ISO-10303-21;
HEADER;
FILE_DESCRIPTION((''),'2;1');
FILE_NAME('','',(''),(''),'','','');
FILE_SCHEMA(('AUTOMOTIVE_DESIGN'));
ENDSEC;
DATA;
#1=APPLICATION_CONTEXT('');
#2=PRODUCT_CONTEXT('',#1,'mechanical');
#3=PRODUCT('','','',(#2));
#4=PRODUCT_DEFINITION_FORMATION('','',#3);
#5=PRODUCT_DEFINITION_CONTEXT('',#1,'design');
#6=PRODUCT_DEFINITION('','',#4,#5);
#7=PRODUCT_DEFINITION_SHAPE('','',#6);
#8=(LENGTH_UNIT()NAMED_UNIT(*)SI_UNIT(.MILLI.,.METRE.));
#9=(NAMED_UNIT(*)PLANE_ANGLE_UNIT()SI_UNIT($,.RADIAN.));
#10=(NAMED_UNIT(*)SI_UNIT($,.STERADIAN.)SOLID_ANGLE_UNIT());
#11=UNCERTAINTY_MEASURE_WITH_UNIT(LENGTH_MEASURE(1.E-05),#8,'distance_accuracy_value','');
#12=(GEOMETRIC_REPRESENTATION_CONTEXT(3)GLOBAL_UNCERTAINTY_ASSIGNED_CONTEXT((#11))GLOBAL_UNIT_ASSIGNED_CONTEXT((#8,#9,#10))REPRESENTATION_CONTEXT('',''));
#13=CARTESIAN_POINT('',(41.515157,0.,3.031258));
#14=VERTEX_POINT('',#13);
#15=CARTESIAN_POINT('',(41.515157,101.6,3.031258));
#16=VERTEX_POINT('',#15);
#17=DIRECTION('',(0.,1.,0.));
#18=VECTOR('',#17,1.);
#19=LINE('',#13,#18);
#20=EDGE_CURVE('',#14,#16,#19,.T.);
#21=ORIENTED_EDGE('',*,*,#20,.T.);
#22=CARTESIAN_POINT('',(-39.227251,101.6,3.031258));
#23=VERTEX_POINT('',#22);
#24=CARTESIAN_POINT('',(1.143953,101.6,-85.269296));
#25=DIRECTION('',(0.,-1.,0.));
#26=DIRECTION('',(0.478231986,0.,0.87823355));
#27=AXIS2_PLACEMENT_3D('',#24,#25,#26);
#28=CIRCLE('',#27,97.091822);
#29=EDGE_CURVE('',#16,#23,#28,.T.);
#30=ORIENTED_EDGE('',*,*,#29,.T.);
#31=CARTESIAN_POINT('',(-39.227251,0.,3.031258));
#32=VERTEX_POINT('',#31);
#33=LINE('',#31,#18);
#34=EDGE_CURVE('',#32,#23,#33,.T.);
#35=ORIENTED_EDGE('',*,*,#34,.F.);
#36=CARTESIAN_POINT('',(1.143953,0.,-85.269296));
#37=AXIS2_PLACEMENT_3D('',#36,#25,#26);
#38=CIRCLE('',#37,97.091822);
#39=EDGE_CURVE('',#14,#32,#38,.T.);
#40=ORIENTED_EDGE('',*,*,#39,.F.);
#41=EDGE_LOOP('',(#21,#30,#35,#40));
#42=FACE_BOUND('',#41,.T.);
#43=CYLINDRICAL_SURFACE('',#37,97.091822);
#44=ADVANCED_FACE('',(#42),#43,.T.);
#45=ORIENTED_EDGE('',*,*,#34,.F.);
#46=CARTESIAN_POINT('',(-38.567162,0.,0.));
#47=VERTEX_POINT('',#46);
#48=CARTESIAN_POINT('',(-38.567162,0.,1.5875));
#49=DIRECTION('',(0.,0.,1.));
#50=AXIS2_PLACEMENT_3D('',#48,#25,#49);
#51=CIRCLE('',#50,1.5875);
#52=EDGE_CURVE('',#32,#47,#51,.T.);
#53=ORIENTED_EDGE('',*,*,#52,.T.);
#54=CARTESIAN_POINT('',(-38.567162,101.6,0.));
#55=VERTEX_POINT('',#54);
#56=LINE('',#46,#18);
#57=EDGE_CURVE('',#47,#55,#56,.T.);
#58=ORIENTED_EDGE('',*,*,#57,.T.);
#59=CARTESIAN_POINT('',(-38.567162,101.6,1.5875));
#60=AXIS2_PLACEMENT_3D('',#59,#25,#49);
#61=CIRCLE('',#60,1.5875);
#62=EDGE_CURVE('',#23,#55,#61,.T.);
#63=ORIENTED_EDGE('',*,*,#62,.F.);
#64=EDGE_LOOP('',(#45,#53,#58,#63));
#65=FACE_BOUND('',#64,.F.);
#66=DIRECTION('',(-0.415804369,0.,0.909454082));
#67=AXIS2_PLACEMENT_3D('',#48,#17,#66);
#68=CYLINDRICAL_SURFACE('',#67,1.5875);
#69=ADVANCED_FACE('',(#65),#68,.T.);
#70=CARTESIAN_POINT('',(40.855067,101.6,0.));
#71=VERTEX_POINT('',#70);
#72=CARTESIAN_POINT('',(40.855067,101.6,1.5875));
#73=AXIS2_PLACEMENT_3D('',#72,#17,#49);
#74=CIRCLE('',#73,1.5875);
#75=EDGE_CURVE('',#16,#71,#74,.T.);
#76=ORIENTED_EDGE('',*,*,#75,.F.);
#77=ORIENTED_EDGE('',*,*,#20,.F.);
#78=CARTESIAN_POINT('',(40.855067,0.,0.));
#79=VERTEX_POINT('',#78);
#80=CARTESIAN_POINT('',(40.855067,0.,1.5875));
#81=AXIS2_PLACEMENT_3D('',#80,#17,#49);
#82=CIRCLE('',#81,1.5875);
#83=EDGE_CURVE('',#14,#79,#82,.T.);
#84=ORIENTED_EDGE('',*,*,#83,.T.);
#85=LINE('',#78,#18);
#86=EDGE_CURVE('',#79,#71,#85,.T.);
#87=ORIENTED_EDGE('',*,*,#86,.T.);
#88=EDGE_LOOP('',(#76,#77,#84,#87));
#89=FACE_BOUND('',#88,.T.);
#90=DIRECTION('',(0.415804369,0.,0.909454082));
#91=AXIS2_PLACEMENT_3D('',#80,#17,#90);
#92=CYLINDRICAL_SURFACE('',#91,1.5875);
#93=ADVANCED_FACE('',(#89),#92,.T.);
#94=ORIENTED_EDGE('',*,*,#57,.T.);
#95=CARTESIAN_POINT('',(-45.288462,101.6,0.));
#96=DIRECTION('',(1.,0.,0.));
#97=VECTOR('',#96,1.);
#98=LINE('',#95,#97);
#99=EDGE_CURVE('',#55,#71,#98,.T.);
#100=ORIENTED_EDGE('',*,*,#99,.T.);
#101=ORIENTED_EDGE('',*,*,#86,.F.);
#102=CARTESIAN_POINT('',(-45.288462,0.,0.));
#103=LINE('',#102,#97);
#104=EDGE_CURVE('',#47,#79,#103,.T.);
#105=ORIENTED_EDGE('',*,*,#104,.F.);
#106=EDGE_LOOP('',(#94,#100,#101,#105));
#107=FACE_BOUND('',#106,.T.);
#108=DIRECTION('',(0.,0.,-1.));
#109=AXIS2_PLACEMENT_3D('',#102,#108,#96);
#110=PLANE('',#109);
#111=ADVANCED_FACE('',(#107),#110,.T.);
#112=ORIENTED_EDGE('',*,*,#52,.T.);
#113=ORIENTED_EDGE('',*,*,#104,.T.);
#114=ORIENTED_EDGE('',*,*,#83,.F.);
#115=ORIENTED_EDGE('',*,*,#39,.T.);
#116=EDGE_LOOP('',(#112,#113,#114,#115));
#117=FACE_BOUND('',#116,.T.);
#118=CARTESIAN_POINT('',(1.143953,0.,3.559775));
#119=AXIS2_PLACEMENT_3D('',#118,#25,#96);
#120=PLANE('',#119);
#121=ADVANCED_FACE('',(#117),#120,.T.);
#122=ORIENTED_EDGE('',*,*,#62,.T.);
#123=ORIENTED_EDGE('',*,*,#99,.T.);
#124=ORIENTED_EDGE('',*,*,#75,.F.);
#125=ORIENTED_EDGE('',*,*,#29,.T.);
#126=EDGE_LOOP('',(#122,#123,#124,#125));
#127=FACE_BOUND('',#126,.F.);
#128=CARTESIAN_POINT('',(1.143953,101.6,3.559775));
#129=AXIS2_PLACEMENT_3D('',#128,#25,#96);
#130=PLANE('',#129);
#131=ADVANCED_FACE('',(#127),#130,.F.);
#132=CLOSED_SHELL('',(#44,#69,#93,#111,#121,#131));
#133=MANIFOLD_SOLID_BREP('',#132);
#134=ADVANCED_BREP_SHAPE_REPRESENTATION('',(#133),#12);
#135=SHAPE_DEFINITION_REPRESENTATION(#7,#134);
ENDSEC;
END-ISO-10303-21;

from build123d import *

# Parameters (mm, degrees)
F1_DEPTH = 101.6
F2_F1_R  = 1.5875
F2_F2_R  = 1.5875


with BuildPart() as f1:
    # F0 (on Front) → F1 (new body)
    with BuildSketch(Plane.XZ):
        with BuildLine():
            ThreePointArc((47.5763678551, 0), (1.1439528316, 11.8225265642), (-45.2884621918, 0))
            Line((-45.2884621918, 0), (47.5763678551, 0))
        make_face()
    extrude(amount=-F1_DEPTH)

    # F2: fillet of radius 1.5875 on 2 edges, made by hand

    # F2_f1
    f2_f1_edges = [f1.edges().sort_by_distance(p)[0] for p in [
        (-45.2884621918, 50.8, 0),
    ]]
    fillet(f2_f1_edges, radius=F2_F1_R)

    # F2_f2
    f2_f2_edges = [f1.edges().sort_by_distance(p)[0] for p in [
        (47.5763678551, 50.8, 0),
    ]]
    fillet(f2_f2_edges, radius=F2_F2_R)


solid = f1.part
